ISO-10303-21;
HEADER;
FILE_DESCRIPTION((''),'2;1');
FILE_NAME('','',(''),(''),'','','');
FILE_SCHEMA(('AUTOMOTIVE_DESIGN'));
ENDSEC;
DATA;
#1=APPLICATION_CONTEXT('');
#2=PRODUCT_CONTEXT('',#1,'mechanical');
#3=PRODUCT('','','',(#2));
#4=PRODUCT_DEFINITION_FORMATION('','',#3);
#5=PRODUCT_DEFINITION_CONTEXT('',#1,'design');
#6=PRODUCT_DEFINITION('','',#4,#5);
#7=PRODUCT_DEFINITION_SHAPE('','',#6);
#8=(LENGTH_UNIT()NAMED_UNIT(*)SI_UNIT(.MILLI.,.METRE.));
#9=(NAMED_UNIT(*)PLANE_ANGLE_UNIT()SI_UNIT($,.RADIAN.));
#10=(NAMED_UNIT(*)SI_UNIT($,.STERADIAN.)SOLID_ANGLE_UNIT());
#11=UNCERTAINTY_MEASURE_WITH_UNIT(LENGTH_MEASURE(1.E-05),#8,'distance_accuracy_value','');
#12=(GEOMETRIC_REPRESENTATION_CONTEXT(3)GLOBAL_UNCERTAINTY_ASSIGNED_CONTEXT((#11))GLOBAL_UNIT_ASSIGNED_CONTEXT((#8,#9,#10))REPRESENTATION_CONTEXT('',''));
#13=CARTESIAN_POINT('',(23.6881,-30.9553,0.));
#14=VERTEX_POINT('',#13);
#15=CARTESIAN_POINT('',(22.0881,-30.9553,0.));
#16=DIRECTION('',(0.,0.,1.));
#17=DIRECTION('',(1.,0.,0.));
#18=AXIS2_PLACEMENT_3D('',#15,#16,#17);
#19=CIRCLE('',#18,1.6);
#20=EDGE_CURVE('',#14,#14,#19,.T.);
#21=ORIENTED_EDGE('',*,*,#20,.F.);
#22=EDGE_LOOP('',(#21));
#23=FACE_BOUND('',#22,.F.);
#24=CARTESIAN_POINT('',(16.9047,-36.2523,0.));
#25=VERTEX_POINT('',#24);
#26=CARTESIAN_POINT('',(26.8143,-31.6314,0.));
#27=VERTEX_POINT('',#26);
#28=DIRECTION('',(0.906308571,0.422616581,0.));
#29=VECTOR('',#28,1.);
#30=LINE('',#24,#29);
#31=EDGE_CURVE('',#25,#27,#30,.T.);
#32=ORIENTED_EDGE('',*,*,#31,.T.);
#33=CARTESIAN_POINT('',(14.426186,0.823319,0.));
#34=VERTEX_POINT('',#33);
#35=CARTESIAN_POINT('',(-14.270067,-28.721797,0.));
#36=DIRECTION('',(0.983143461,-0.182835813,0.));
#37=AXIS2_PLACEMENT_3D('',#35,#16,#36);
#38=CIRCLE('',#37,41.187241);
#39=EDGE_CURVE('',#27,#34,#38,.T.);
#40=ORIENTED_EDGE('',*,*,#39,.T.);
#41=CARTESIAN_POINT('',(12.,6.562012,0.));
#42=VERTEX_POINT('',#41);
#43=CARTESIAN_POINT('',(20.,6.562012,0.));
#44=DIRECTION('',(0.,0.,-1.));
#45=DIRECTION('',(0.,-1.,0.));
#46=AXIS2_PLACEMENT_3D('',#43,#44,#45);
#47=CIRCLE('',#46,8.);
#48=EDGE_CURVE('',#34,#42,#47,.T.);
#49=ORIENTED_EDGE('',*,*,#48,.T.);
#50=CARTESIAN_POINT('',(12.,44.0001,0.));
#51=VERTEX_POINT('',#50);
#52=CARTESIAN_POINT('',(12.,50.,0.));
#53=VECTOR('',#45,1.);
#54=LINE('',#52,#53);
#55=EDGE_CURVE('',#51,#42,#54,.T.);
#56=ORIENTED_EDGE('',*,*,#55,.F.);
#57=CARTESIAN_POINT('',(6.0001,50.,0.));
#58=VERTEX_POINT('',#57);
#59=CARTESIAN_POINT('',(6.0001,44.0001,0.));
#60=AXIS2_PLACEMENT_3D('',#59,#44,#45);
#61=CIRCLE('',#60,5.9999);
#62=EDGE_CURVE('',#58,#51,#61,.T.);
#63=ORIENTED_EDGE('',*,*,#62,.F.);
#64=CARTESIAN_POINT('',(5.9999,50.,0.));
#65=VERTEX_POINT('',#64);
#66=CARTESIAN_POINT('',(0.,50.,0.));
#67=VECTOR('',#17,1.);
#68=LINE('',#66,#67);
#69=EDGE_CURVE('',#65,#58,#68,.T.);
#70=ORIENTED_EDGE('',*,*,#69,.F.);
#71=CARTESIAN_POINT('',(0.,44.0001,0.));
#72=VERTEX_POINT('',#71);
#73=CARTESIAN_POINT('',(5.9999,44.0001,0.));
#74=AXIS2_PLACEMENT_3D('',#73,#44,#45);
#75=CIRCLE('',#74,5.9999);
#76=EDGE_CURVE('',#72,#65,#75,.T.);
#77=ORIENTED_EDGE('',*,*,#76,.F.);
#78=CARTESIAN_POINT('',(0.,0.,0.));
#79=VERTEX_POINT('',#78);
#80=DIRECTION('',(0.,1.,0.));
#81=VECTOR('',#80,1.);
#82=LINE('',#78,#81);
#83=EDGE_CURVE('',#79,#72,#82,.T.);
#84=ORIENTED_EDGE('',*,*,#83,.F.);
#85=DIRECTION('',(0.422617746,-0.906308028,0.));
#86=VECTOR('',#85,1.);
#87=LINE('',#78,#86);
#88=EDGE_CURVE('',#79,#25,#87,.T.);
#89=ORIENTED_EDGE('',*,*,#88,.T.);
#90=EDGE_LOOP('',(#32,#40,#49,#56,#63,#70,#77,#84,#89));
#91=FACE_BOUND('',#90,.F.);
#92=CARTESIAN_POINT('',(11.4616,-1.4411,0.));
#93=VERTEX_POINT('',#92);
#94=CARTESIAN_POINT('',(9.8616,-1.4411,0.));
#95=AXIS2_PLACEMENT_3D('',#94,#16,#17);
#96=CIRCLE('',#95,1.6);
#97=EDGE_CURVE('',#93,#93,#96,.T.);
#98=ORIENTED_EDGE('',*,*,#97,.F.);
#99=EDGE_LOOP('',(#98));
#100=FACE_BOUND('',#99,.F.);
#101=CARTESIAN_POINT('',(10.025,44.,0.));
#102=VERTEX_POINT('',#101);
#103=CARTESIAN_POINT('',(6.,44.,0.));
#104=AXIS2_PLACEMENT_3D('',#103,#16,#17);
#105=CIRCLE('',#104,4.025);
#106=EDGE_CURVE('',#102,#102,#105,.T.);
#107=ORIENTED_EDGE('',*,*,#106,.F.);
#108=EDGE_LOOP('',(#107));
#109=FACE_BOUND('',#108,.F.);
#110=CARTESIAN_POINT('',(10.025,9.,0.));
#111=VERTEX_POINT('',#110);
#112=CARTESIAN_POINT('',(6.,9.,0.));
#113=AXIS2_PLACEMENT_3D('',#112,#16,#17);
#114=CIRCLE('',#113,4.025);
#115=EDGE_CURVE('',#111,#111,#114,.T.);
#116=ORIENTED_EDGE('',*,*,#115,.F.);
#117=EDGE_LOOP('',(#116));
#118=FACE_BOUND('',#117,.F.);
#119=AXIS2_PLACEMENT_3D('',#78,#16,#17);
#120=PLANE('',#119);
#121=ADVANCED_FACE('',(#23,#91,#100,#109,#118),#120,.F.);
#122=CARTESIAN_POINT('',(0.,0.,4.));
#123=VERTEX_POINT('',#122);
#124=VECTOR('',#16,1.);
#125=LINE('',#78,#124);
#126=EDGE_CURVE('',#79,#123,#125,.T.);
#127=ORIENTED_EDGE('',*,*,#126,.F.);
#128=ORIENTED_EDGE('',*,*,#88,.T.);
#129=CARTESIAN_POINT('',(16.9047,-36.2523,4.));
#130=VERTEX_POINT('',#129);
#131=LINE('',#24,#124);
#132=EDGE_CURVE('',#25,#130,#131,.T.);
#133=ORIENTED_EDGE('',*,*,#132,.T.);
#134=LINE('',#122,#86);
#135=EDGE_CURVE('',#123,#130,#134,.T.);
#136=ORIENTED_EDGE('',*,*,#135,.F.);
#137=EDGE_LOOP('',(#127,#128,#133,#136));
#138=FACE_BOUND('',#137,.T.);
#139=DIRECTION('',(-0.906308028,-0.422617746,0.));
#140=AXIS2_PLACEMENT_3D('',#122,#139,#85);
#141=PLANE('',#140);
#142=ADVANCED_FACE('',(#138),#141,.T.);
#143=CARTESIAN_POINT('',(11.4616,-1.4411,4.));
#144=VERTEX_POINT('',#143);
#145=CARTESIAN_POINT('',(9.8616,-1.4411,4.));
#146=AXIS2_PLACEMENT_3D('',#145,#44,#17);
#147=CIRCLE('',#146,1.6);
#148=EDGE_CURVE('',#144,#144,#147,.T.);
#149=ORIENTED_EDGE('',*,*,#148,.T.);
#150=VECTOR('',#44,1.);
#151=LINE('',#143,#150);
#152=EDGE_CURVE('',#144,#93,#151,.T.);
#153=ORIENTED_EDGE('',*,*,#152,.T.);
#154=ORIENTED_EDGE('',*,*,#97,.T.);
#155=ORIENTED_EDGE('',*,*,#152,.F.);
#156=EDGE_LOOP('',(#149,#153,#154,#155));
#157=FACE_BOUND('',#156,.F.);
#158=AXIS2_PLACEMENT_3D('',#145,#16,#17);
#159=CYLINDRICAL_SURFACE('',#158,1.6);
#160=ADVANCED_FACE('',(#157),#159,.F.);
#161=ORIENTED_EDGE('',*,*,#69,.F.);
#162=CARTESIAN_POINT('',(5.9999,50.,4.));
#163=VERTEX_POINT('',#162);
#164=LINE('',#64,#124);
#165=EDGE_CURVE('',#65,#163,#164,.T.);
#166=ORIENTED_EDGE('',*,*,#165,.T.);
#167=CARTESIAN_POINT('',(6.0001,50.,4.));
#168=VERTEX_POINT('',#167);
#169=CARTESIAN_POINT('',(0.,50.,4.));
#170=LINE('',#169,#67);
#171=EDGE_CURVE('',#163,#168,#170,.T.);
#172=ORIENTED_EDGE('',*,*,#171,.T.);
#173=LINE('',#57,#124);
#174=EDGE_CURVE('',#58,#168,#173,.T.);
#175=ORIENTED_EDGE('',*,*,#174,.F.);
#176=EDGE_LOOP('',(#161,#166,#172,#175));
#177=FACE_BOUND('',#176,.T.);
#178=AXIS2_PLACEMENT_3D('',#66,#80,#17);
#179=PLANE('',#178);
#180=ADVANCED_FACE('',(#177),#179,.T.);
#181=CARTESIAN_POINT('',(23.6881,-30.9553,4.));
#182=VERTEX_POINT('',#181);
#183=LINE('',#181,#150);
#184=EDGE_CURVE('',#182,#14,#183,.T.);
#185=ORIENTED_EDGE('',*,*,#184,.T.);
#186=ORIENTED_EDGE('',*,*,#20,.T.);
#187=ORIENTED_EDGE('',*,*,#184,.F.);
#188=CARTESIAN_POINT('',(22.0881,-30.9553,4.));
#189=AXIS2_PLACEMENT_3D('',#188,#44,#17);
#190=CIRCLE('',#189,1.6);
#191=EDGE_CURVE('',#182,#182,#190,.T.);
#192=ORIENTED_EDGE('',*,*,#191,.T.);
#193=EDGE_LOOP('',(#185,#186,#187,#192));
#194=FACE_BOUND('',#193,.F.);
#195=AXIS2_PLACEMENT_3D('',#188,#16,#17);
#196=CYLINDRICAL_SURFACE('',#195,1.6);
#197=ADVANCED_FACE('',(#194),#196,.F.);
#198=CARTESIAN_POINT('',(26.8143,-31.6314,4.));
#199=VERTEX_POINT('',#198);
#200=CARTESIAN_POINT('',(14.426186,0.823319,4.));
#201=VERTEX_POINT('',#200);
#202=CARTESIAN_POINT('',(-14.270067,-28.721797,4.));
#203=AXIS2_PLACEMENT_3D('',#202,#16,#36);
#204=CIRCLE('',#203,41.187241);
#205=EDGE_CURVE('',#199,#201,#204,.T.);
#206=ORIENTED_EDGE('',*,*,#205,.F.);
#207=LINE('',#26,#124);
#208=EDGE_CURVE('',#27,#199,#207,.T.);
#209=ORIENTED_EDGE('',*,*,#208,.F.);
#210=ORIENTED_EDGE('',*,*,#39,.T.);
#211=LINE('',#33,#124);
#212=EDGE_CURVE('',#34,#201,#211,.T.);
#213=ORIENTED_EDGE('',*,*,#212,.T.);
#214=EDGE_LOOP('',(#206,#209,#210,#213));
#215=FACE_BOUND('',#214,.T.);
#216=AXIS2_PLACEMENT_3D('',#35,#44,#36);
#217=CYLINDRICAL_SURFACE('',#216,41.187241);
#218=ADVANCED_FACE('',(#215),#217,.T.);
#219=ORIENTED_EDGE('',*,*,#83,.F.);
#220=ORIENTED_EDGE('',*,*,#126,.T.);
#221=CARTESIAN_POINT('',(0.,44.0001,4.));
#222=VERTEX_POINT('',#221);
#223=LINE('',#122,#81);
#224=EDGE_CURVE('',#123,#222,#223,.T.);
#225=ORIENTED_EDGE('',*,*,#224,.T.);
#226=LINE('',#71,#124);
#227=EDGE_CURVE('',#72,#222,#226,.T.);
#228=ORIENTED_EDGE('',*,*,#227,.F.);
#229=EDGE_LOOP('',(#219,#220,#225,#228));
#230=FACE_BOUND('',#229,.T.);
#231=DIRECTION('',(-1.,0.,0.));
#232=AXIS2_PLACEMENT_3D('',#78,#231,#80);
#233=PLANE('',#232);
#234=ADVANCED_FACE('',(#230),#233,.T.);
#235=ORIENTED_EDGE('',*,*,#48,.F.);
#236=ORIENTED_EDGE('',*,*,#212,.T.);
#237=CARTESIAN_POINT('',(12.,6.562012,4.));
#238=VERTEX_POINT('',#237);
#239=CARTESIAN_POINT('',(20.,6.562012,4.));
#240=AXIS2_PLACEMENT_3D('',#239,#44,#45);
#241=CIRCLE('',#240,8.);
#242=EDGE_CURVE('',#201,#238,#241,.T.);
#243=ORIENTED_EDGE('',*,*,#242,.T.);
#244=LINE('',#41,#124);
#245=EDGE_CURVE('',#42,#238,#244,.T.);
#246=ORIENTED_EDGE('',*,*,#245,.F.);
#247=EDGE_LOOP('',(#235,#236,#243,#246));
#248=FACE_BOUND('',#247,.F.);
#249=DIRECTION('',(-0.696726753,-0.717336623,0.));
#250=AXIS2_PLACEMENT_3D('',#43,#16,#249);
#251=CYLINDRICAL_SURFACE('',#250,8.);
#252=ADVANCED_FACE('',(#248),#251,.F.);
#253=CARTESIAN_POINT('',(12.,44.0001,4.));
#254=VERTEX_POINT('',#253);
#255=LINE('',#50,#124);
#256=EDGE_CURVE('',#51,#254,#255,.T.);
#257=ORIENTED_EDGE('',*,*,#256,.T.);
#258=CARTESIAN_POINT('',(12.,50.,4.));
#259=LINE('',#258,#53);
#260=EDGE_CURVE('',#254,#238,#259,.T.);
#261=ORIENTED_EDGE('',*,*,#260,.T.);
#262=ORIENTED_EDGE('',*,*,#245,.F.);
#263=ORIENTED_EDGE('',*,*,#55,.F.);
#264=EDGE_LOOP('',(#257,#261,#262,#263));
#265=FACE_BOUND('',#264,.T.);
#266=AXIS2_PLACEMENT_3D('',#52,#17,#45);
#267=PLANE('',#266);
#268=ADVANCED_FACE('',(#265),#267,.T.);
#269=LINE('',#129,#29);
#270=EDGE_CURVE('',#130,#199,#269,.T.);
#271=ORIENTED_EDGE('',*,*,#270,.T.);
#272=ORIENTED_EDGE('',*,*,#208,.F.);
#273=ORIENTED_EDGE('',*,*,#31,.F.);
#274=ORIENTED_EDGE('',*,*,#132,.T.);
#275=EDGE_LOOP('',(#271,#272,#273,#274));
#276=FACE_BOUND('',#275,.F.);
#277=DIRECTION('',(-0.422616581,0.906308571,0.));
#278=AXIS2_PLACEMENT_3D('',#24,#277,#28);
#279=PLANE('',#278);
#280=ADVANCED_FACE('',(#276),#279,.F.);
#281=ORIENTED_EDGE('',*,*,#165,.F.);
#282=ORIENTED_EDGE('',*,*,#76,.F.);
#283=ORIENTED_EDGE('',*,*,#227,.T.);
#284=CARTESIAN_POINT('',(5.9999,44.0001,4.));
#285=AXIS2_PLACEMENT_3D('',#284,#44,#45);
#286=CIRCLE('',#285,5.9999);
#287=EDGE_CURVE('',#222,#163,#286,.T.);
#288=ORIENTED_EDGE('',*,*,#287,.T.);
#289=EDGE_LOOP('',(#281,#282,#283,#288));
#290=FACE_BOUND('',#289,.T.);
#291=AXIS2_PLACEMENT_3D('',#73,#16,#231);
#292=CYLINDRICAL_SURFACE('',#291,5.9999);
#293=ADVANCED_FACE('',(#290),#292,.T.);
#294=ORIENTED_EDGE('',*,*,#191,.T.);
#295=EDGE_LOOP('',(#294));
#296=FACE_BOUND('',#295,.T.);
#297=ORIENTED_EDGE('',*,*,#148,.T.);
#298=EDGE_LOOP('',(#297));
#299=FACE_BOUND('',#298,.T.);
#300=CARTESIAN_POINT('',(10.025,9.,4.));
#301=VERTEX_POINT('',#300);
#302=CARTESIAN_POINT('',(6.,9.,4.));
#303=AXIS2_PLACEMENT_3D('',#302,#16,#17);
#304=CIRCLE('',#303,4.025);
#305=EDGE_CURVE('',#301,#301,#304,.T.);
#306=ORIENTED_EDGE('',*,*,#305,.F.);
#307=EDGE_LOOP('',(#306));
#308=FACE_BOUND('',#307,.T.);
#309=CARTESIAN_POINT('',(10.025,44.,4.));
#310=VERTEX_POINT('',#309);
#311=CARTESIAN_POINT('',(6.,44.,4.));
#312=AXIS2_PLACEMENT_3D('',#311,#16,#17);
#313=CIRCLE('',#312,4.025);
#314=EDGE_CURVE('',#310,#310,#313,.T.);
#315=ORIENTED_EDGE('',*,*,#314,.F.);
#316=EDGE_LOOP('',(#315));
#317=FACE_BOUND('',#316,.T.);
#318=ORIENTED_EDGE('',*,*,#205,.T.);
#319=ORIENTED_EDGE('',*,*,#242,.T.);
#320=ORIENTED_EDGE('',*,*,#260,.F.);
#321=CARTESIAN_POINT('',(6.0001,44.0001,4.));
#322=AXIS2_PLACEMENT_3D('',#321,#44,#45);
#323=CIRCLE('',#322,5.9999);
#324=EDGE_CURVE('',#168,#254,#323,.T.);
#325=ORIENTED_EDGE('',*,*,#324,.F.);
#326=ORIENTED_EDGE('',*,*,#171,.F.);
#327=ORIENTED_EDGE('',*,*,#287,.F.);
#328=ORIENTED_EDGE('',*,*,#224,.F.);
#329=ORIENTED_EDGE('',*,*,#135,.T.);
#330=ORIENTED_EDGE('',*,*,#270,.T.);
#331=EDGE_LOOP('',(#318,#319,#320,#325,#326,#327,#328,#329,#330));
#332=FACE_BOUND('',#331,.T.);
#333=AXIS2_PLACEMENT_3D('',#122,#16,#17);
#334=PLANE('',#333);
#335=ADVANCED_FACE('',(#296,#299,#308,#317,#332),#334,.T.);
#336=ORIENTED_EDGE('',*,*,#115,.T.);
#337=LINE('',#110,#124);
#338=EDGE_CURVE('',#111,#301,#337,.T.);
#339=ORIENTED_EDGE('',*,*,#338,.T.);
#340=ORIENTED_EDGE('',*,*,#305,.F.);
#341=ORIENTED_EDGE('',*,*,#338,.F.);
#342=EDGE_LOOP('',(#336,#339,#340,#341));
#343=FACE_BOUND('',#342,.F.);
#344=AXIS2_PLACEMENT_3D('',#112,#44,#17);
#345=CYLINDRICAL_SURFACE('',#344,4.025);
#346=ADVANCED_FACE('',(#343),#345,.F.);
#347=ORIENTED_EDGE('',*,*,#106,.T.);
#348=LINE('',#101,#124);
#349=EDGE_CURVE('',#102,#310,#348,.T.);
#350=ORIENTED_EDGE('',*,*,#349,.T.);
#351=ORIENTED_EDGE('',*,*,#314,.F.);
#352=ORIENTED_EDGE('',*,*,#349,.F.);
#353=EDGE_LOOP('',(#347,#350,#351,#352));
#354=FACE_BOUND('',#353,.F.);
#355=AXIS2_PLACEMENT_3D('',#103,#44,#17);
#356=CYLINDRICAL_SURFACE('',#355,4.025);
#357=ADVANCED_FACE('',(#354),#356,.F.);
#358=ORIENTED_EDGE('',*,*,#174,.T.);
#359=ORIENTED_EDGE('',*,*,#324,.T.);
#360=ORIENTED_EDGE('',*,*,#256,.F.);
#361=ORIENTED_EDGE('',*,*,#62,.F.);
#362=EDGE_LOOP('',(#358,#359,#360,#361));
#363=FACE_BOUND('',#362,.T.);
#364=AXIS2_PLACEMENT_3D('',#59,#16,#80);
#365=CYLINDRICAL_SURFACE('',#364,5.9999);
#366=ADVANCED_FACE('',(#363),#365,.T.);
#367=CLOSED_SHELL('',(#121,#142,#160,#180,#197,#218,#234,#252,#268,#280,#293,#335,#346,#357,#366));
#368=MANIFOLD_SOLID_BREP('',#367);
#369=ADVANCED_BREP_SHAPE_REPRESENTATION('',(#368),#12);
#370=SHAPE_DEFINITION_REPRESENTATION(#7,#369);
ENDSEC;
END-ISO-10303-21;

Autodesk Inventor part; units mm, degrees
ref_plane "YZ Plane" through (0, 0, 0) normal (1, 0, 0) x (0, 1, 0)
ref_plane "XZ Plane" through (0, 0, 0) normal (0, 1, 0) x (-1, 0, 0)
ref_plane "XY Plane" through (0, 0, 0) normal (0, 0, 1) x (1, 0, 0)
sketch "스케치1" plane through (0, 0, 0) normal (0, 0, 1) x (1, 0, 0)
  line L0 (0, 0) -> (8.4524, -18.1262)
  line L1 (0, 0) -> (20, 0) construction
  line L2 (8.4524, -18.1262) -> (14.7965, -15.1678)
  line L3 (8.4524, -18.1262) -> (16.9047, -36.2523)
  line L4 (8.4524, -18.1262) -> (28.4524, -18.1262) construction
  arc A0 (16.9047, -36.2523) -> (0, 0) centre (-14.2701, -28.7218) ccw
  line L5 (0, 0) -> (0, 50)
  line L6 (0, 0) -> (50, 0) construction
  line L7 (0, 50) -> (12, 50)
  line L8 (12, 50) -> (12, 3)
  circle A1 centre (6, 44) radius 4.025
  circle A2 centre (6, 9) radius 4.025
  line L9 (16.9047, -36.2523) -> (26.8143, -31.6314)
  line L10 (16.9047, -36.2523) -> (27.8387, -36.2523) construction
  line L11 (12, -47.3039) -> (11.9482, -47.1928)
  arc A3 (26.2229, -36.2523) -> (12, 3) centre (-14.2701, -28.7218) ccw
  dimension "d16" = 20
  dimension "d17" = 65
  dimension "d18" = 7
  dimension "d19" = 90
  dimension "d20" = 20
  dimension "d21" = 65
  dimension "d22" = 50
  dimension "d23" = 90
  dimension "d24" = 12
  dimension "d25" = 90
  dimension "d26" = 47
  dimension "d27" = 8.05
  dimension "d28" = 8.05
  dimension "d29" = 6
  dimension "d30" = 6
  dimension "d31" = 6
  dimension "d32" = 35
  dimension "d33" = 25
extrude "돌출1" add sketch "스케치1" along normal blind 4 contours L5 L7 L8 A3 L9 A0
fillet "모깎기1" radius 6 2 edges at (12, 50, 2) (0, 50, 2)
sketch "스케치2" plane through (0, 0, 4) normal (0, 0, 1) x (1, 0, 0)
  line L0 (16.9047, -36.2523) -> (26.8143, -31.6314) projected
  arc A0 (17.3077, -34.3271) -> (18.715, -35.4082) centre (18.2923, -34.5019) ccw projected
  arc A1 (26.2765, -31.8822) -> (26.8523, -31.032) centre (25.8539, -30.9759) ccw projected
  line L1 (20, -34.809) -> (17.8869, -30.2774)
  line L2 (20, -34.809) -> (25, -34.809) construction
  line L3 (17.8869, -30.2774) -> (26.834, -26.1053)
  arc A2 (26.8143, -31.6314) -> (12, 3) centre (-14.2701, -28.7218) ccw projected
  line L4 (26.834, -26.1053) -> (17.7607, -30.3363)
  arc A3 (16.9047, -36.2523) -> (0, 0) centre (-14.2701, -28.7218) ccw projected
  arc A4 (26.2765, -31.8822) -> (26.8523, -31.032) centre (25.8539, -30.9759) ccw projected
  line L5 (26.834, -26.1053) -> (16.9047, -36.2523)
  line L6 (17.7607, -30.3363) -> (26.8143, -31.6314)
  circle A5 centre (22.0881, -30.9553) radius 1.6
  point P0 (12.3536, 2.7038)
  point P1 (0.5383, -0.2738)
  dimension "d38" = 5
  dimension "d39" = 115
  dimension "d40" = 90
  dimension "d41" = 3.2
extrude "돌출2" cut sketch "스케치2" against normal blind 4 contours A5 L6 L5 | L5 L6 A5 | A5 L5 L6 | L5 A5 L6
sketch "스케치4" plane through (0, 0, 4) normal (0, 0, 1) x (1, 0, 0)
  line L0 (12, 3) -> (12, 44) projected
  line L1 (12, 3) -> (2.5423, -1.4102)
  arc A0 (16.9047, -36.2523) -> (0, 0) centre (-14.2701, -28.7218) ccw projected
  line L2 (12, 3) -> (22.4355, 3) construction
  line L3 (7.2711, 0.7949) -> (9.8068, -4.643)
  line L4 (7.2711, 0.7949) -> (13.2711, 0.7949) construction
  line L5 (9.8068, -4.643) -> (7.8894, -5.5371)
  line L6 (9.8068, -4.643) -> (16.6121, -1.4696)
  arc A1 (26.8143, -31.6314) -> (12, 3) centre (-14.2701, -28.7218) ccw projected
  line L7 (9.8068, -4.643) -> (17.3156, -4.643) construction
  line L8 (2.5423, -1.4102) -> (16.6121, -1.4696)
  line L9 (7.8894, -5.5371) -> (12, 3)
  circle A2 centre (9.8616, -1.4411) radius 1.6
  dimension "d54" = 155
  dimension "d55" = 6
  dimension "d57" = 25
  dimension "d58" = 3.2
extrude "돌출4" cut sketch "스케치4" against normal up to surface (4 mm away) contours A2 L8 L9 | L9 L8 L3 A2 | L3 L8 A2 | A2 L9 L8 | L9 A2 L3 L8 | L8 L3 A2
sketch "스케치6" plane through (0, 0, 4) normal (0, 0, 1) x (1, 0, 0)
  line L0 (0, 0) -> (16.9047, -36.2523)
  circle A0 centre (9.8616, -1.4411) radius 1.6 projected
  circle A1 centre (22.0881, -30.9553) radius 1.6 projected
  arc A2 (12, 44) -> (0, 44) centre (6, 44) ccw projected
  line L1 (0, 44) -> (0, 0) projected
  arc A3 (16.9047, -36.2523) -> (0, 0) centre (-14.2701, -28.7218) ccw projected
  line L2 (16.9047, -36.2523) -> (26.8143, -31.6314) projected
  arc A4 (26.8143, -31.6314) -> (12, 3) centre (-14.2701, -28.7218) ccw projected
  line L3 (12, 3) -> (12, 44) projected
extrude "돌출6" add sketch "스케치6" against normal up to surface (4 mm away) contours A3 L0
fillet "모깎기3" radius 8 1 edges at (12, 3, 2)
properties part number "Grip_" material "알루미늄 6061"
